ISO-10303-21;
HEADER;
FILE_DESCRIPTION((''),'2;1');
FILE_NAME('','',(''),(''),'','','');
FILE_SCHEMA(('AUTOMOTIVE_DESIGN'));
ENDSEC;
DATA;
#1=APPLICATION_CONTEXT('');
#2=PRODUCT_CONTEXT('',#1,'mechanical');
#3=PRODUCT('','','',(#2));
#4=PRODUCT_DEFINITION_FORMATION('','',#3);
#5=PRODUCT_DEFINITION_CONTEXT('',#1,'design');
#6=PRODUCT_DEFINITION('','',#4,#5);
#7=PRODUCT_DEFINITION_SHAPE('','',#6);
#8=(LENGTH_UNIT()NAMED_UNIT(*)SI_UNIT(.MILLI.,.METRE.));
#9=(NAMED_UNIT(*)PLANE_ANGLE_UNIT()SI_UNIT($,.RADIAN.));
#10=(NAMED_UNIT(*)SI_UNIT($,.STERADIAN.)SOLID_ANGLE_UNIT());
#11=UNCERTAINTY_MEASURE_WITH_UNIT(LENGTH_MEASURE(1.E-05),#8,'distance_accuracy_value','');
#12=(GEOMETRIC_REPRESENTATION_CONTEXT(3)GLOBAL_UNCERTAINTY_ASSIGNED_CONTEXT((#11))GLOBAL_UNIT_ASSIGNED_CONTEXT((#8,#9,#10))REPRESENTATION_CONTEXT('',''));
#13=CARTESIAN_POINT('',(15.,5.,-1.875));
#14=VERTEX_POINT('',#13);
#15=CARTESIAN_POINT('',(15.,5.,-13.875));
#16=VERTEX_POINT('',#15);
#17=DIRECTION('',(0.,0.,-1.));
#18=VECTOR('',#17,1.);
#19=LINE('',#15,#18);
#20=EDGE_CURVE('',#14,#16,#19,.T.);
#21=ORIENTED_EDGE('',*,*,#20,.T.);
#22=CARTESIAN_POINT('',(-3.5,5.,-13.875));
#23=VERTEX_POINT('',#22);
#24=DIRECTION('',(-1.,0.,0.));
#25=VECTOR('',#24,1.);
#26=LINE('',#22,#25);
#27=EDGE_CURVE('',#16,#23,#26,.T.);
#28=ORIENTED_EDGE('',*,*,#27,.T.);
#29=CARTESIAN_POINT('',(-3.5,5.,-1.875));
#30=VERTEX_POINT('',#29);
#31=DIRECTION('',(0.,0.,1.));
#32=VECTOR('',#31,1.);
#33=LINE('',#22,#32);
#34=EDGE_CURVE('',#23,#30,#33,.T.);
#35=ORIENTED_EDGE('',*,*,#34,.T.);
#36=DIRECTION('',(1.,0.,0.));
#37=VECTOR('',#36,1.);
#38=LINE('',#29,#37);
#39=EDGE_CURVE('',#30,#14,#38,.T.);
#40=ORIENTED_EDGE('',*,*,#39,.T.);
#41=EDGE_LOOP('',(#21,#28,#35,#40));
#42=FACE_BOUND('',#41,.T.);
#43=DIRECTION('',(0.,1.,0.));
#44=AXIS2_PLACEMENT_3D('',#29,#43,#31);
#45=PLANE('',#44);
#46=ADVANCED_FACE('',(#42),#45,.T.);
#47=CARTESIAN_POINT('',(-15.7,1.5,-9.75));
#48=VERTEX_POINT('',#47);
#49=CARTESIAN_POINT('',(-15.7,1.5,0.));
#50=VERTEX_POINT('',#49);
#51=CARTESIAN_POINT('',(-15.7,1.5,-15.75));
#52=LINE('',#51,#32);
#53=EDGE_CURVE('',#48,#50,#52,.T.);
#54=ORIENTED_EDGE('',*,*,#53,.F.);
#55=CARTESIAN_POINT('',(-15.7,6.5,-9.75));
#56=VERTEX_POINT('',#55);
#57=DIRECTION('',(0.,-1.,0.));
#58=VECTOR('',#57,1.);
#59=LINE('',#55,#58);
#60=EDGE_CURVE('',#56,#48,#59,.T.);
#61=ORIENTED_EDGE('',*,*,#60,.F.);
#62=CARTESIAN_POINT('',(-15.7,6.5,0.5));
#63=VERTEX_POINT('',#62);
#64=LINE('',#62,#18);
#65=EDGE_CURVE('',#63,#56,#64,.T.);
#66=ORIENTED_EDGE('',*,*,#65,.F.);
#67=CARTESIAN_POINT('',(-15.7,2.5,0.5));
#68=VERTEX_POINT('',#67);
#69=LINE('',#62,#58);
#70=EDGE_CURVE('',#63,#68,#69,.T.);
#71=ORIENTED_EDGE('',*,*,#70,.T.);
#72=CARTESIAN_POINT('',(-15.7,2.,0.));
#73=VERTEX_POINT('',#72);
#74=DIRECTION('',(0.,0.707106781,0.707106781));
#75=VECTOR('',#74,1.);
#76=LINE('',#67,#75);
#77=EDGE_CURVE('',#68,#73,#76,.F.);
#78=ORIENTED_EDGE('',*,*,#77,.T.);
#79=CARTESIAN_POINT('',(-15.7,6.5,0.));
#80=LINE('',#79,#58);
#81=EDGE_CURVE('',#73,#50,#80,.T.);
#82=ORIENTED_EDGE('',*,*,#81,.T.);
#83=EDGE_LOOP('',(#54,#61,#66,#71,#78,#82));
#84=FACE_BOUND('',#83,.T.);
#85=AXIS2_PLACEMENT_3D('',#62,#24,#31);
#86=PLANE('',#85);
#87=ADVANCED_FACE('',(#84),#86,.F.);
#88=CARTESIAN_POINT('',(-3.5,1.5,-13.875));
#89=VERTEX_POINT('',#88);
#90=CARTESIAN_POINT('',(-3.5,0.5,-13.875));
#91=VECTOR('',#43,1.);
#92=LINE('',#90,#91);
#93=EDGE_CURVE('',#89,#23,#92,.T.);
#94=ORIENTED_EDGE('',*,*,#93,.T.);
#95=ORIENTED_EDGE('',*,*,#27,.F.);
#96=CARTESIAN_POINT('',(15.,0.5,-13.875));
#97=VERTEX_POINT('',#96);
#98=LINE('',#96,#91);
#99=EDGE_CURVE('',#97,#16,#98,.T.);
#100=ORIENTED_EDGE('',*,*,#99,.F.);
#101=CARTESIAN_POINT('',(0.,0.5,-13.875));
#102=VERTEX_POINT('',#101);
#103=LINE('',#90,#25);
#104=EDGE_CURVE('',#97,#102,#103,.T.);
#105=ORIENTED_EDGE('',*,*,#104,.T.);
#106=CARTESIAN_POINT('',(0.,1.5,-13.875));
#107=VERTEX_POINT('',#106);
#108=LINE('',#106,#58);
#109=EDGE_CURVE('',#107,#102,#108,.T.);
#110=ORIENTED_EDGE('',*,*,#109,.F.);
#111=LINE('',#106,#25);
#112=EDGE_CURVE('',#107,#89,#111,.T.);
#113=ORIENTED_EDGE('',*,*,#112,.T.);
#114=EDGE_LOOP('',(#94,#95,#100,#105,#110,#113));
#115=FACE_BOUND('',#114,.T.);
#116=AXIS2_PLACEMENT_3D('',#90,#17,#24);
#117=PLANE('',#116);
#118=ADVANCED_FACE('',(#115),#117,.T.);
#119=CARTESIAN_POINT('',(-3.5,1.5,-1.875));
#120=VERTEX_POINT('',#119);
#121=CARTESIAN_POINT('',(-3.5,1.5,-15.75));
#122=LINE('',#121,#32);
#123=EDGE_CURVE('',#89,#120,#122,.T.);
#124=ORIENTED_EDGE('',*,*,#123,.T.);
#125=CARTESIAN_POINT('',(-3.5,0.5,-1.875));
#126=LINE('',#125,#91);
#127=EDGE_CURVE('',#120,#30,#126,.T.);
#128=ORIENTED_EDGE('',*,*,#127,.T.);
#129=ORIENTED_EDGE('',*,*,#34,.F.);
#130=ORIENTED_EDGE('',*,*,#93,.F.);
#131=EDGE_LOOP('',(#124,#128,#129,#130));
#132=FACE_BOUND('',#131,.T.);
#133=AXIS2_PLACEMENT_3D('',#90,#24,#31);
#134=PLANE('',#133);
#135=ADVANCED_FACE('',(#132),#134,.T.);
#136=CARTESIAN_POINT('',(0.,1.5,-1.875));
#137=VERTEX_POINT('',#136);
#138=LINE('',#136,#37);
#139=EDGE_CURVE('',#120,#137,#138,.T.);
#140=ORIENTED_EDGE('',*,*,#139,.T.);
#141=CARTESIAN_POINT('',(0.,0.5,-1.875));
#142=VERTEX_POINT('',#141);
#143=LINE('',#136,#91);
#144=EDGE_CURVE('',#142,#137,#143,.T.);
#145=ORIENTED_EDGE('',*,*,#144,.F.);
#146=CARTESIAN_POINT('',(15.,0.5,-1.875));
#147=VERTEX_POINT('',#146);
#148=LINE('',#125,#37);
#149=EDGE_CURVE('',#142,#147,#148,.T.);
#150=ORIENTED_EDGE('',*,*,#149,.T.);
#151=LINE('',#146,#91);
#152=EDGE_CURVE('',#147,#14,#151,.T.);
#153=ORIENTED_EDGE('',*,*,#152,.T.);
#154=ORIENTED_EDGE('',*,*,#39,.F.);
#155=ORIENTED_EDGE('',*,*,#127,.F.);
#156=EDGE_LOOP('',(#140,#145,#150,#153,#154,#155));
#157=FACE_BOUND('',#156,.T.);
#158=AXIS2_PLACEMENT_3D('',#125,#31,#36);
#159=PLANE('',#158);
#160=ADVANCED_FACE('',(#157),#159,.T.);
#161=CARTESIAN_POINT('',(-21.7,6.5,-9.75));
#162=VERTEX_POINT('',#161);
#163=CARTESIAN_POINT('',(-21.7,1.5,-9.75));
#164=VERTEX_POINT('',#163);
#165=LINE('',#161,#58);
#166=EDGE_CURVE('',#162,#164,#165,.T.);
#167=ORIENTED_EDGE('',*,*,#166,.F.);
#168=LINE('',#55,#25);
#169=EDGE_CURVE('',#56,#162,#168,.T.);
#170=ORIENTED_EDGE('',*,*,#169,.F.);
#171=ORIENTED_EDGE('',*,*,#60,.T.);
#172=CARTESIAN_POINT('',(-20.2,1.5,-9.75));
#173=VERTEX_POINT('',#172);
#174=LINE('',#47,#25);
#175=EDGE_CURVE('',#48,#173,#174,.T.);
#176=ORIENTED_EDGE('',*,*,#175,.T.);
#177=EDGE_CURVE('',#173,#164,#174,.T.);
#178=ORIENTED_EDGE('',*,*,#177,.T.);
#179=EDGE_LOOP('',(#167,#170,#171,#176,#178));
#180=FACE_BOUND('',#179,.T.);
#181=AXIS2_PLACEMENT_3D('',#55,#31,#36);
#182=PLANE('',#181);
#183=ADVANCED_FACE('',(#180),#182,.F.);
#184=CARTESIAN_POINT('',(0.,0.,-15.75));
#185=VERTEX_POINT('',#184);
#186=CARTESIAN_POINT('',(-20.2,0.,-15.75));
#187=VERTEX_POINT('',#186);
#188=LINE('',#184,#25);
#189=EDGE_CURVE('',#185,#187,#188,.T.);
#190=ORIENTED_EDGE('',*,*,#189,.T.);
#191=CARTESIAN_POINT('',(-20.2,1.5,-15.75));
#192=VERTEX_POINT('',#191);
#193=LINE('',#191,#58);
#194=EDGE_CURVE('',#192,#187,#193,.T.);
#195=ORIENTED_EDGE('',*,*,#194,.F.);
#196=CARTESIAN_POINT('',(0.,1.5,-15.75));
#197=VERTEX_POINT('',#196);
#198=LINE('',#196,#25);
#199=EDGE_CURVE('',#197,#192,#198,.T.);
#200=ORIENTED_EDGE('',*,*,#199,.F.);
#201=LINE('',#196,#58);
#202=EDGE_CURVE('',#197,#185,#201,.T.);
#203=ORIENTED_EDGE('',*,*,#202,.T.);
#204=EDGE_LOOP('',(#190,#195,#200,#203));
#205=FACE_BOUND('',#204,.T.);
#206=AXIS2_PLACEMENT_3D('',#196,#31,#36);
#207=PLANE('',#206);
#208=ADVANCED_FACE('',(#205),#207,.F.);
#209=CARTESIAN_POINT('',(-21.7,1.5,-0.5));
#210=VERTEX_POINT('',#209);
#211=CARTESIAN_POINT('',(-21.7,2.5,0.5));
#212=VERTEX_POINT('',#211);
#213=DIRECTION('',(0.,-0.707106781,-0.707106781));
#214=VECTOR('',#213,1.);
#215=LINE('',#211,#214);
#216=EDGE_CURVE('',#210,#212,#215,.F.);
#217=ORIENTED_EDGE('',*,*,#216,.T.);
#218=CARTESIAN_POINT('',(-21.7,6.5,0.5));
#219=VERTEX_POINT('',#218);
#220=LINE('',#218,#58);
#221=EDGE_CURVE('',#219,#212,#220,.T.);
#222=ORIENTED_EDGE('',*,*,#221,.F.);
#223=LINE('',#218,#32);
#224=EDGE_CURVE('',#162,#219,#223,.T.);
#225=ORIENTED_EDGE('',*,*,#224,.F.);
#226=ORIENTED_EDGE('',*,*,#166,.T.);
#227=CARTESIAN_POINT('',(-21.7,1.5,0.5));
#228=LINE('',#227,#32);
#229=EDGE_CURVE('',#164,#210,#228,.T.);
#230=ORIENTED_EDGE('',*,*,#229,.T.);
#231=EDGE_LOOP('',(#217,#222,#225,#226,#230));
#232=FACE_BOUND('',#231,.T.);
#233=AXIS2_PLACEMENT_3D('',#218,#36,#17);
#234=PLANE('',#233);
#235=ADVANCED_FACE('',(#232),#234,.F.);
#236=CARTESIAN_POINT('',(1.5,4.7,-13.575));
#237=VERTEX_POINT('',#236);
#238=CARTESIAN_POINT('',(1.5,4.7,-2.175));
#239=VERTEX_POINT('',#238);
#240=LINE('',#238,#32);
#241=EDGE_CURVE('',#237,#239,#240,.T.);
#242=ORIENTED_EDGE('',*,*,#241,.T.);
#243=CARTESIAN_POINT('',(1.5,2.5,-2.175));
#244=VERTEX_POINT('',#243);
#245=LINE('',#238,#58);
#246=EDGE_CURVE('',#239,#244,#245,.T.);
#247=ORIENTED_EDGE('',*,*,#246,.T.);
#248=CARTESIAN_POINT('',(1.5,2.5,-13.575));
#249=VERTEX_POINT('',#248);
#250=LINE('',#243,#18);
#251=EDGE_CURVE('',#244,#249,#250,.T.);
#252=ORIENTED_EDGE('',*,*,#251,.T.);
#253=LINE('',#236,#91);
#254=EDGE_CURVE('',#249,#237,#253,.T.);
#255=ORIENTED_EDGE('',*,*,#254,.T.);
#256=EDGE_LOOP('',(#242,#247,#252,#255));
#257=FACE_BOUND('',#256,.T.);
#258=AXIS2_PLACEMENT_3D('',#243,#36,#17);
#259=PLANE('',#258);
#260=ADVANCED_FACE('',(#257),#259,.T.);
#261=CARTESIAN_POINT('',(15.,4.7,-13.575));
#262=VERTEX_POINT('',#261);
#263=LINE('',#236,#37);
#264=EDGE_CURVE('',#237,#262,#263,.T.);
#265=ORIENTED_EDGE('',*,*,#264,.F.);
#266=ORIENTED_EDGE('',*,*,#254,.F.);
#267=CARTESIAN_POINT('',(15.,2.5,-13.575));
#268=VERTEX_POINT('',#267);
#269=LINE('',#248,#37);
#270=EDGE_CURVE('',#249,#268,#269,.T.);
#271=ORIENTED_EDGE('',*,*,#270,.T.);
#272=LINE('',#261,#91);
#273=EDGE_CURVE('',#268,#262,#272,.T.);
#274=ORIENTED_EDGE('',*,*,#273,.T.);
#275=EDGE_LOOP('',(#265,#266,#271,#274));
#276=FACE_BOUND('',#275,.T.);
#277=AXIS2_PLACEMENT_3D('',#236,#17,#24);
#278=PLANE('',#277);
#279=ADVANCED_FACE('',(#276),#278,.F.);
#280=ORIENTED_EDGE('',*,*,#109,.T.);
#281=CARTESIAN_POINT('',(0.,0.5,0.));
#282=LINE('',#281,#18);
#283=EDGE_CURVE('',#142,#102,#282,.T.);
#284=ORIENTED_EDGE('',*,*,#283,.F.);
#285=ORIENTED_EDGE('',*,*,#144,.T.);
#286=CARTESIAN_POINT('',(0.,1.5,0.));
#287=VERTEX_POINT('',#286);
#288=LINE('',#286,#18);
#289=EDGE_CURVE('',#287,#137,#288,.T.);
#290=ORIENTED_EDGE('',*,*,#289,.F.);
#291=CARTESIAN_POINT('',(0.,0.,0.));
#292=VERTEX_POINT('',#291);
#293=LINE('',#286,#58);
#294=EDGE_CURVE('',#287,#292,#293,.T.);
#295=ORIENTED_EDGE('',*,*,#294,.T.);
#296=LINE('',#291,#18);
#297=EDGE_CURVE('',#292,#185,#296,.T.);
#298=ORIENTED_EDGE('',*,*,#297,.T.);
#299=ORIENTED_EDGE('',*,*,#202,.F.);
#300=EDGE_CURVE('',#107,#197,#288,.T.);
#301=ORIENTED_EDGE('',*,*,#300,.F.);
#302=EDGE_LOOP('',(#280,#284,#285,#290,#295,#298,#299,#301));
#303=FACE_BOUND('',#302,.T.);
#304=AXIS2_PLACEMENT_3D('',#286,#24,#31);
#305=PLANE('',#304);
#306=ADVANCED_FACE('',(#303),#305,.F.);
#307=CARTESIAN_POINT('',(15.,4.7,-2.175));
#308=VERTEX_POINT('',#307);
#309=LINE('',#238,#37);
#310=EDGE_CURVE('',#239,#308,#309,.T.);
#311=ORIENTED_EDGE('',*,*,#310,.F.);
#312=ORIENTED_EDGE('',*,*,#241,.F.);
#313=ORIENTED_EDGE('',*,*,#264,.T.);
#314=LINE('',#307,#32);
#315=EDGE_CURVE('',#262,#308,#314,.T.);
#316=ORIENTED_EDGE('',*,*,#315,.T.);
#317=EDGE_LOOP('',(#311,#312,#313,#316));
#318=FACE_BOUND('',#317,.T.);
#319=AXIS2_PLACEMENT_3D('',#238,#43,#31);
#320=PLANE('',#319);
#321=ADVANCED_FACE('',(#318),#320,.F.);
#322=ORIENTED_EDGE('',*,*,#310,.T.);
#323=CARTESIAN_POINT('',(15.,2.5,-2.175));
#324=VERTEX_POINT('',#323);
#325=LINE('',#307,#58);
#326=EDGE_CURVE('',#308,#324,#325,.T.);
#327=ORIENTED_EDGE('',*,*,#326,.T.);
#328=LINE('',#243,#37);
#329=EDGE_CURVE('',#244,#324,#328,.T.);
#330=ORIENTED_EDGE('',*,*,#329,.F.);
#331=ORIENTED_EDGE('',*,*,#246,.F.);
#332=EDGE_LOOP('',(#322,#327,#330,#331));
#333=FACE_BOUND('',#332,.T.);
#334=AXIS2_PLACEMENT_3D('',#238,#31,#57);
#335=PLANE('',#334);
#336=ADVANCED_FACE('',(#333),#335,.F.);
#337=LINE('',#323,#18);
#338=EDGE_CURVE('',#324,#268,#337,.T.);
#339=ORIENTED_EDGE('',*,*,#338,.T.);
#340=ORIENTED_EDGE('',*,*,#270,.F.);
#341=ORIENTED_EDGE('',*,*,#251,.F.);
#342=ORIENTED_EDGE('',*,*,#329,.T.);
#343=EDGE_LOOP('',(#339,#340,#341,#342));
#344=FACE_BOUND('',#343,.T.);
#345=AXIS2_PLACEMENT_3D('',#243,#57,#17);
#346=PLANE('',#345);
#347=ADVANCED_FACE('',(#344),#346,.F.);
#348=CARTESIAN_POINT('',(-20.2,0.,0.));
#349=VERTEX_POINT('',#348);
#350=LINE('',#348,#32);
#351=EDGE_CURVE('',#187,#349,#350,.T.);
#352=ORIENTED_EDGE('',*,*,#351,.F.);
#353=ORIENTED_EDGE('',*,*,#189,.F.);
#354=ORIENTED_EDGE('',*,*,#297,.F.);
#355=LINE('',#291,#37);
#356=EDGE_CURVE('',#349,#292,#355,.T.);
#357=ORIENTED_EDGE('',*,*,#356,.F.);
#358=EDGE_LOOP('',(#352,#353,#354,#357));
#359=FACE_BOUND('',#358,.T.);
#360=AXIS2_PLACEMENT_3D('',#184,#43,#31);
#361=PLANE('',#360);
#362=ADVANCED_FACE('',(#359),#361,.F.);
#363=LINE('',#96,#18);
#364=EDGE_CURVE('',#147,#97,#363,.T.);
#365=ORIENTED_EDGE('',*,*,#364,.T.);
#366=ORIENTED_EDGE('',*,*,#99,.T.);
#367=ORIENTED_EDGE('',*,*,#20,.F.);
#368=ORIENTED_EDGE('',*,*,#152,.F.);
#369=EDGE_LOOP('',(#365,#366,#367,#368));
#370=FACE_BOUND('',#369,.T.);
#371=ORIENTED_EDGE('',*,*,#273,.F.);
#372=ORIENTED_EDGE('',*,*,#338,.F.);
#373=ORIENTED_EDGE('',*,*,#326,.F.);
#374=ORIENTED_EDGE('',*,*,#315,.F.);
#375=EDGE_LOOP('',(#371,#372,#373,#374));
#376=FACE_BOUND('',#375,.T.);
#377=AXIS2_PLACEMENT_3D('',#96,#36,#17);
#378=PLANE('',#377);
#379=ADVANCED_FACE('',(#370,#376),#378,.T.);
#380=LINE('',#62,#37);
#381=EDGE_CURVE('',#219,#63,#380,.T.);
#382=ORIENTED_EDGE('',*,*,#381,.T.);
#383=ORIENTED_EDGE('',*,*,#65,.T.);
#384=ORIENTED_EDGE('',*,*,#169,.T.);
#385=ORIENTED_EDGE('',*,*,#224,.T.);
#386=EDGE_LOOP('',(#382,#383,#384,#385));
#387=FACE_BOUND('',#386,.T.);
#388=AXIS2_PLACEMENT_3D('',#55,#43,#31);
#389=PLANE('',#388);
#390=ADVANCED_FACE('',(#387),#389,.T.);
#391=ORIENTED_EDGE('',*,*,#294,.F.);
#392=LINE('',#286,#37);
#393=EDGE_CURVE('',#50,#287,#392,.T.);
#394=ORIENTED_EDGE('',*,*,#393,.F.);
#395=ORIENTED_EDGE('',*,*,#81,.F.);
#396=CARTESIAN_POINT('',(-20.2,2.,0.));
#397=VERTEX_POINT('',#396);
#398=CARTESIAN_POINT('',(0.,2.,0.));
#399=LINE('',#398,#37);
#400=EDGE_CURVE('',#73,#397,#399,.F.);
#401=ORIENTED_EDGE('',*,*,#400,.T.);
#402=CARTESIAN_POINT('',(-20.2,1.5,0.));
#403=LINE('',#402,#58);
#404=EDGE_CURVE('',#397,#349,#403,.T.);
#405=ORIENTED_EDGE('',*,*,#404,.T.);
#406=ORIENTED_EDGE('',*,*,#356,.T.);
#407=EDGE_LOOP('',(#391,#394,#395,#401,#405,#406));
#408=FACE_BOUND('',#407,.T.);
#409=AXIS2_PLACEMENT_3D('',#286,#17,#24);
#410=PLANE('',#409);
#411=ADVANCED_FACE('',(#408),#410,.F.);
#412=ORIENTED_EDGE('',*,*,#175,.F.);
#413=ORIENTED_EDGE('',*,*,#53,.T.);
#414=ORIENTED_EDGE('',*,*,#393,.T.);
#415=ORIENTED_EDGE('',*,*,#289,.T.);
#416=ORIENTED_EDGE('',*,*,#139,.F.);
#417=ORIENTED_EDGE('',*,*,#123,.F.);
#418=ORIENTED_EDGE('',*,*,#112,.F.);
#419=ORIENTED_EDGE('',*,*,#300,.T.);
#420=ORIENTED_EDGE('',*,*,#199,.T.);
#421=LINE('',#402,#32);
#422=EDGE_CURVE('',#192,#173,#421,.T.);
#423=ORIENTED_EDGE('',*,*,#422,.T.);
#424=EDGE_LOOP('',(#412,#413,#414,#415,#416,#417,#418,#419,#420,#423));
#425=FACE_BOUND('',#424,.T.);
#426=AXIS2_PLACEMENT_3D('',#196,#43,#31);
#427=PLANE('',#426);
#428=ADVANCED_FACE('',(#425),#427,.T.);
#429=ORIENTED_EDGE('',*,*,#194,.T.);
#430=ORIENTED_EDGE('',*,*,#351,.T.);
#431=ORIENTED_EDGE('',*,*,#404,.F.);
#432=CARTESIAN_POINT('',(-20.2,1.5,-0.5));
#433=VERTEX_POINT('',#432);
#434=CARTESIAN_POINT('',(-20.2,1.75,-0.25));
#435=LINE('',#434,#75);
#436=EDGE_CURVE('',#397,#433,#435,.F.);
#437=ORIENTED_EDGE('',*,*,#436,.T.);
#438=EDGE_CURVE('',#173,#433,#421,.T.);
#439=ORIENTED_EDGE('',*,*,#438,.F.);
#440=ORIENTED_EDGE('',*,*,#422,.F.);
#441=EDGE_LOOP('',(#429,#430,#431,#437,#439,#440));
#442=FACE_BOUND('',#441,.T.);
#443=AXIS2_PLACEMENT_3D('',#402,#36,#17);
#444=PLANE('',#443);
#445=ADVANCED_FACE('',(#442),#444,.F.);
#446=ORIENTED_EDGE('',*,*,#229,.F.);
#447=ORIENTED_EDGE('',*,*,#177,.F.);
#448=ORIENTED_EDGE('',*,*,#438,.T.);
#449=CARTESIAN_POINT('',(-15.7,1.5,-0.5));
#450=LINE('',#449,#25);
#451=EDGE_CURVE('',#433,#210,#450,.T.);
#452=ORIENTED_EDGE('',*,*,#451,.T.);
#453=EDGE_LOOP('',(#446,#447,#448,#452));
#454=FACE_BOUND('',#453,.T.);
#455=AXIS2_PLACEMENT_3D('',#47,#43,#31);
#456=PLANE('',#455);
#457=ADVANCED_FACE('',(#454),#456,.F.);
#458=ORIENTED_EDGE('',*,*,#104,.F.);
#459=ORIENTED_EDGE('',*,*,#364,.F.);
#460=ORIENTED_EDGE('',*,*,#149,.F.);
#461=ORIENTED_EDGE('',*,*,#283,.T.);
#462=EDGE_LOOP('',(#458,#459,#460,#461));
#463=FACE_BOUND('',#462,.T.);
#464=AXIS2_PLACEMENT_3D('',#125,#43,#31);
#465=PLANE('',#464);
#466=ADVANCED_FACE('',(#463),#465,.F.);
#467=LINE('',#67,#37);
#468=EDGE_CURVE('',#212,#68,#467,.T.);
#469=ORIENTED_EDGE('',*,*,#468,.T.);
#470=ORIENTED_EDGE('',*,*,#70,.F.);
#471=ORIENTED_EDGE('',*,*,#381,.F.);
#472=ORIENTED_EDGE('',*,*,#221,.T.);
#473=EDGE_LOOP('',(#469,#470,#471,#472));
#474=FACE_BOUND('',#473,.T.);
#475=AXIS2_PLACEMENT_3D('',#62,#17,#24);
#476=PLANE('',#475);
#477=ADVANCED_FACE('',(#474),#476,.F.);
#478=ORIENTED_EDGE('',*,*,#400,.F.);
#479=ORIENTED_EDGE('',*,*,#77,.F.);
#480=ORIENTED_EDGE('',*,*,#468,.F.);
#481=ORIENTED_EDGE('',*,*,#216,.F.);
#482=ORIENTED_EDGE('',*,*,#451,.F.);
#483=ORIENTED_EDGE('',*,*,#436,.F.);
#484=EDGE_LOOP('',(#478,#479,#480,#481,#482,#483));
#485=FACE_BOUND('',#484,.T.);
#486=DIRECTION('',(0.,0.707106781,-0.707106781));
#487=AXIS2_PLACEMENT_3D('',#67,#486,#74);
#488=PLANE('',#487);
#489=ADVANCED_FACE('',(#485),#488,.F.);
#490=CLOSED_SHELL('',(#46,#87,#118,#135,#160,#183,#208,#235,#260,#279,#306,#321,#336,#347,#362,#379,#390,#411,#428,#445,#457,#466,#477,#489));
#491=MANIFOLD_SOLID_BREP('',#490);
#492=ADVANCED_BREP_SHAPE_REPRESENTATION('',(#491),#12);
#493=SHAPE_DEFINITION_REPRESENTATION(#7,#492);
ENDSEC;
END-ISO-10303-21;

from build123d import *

# Parameters (mm, degrees)
ESQUISSE1_W             = 20.2
ESQUISSE1_H             = 15.75
BOSS_EXTRU_1_DEPTH      = 1.5
BOSS_EXTRU_2_DEPTH      = 3.5
BOSS_EXTRU_2_DEPTH_BACK = 1
ESQUISSE2_W             = 18.5
ESQUISSE2_H             = 12
ESQUISSE3_W             = 11.4
ESQUISSE3_H             = 2.2
ENL_V_MAT_EXTRU_1_DEPTH = 13.5
ESQUISSE4_W             = 6
ESQUISSE4_H             = 10.25
BOSS_EXTRU_4_DEPTH      = 5
CHANFREIN1_SIZE         = 1


with BuildPart() as part:
    # Esquisse1 → Boss.-Extru.1 (new body)
    with BuildSketch(Plane(origin=(0, 0, 0), x_dir=(1, 0, 0), z_dir=(0, 1, 0))):
        with Locations((-10.1, 7.875)):
            Rectangle(ESQUISSE1_W, ESQUISSE1_H)
    extrude(amount=BOSS_EXTRU_1_DEPTH)

    # Esquisse2 → Boss.-Extru.2 (add, two sides: drawn at the far end of the back side and taken through both)
    with BuildSketch(Plane(origin=(0, 1.5, 0), x_dir=(1, 0, 0), z_dir=(0, 1, 0)).offset(-BOSS_EXTRU_2_DEPTH_BACK)):
        with Locations((5.75, 7.875)):
            Rectangle(ESQUISSE2_W, ESQUISSE2_H)
    extrude(amount=BOSS_EXTRU_2_DEPTH + BOSS_EXTRU_2_DEPTH_BACK)

    # Esquisse3 → Enlèv. mat.-Extru.1 (cut)
    with BuildSketch(Plane(origin=(15, 0, 0), x_dir=(0, 0, -1), z_dir=(1, 0, 0))):
        with Locations((7.875, 3.6)):
            Rectangle(ESQUISSE3_W, ESQUISSE3_H)
    extrude(amount=-ENL_V_MAT_EXTRU_1_DEPTH, mode=Mode.SUBTRACT)

    # Esquisse4 → Boss.-Extru.4 (add)
    with BuildSketch(Plane(origin=(0, 1.5, 0), x_dir=(1, 0, 0), z_dir=(0, 1, 0))):
        with Locations((-18.7, 4.625)):
            Rectangle(ESQUISSE4_W, ESQUISSE4_H)
    extrude(amount=BOSS_EXTRU_4_DEPTH)

    # Chanfrein1
    # the kernel refuses this chamfer: 1 mm, written as the material it takes off along each edge
    with BuildSketch(Plane(origin=(-13.128317012, 1.5, 0.5), x_dir=(0, -0.02749587661058627, -0.9996219169112968), z_dir=(-1, 0, 0))) as chanfrein1_piece_1_section:
        Polygon((CHANFREIN1_SIZE * 0.999621916911, -CHANFREIN1_SIZE * 0.0274958766106), (-CHANFREIN1_SIZE * 0.0274958766106, -CHANFREIN1_SIZE * 0.999621916911), (0, 0), align=None)
    chanfrein1_piece_1 = extrude(amount=11.143365976, mode=Mode.PRIVATE)
    chanfrein1_piece_1 = split(chanfrein1_piece_1, bisect_by=Plane(origin=(-16.664158506, 1.893401084, 0), z_dir=(0, 0, 1)), keep=Keep.TOP, mode=Mode.PRIVATE)
    chanfrein1_piece_1 = split(chanfrein1_piece_1, bisect_by=Plane(origin=(-20.2, 1.893401084, 0.29176571), z_dir=(1, 0, 0)), keep=Keep.TOP, mode=Mode.PRIVATE)
    add(chanfrein1_piece_1, mode=Mode.SUBTRACT)
    with BuildSketch(Plane(origin=(-13.128317012, 1.5, 0.5), x_dir=(0, -0.02749587661058627, -0.9996219169112968), z_dir=(-1, 0, 0))) as chanfrein1_piece_2_section:
        Polygon((CHANFREIN1_SIZE * 0.999621916911, -CHANFREIN1_SIZE * 0.0274958766106), (-CHANFREIN1_SIZE * 0.0274958766106, -CHANFREIN1_SIZE * 0.999621916911), (0, 0), align=None)
    chanfrein1_piece_2 = extrude(amount=11.143365976, mode=Mode.PRIVATE)
    chanfrein1_piece_2 = split(chanfrein1_piece_2, bisect_by=Plane(origin=(-22.235841494, 1.645570657, 0), z_dir=(0, 0, -1)), keep=Keep.TOP, mode=Mode.PRIVATE)
    chanfrein1_piece_2 = split(chanfrein1_piece_2, bisect_by=Plane(origin=(-20.2, 1.645570657, -0.181859612), z_dir=(-1, 0, 0)), keep=Keep.TOP, mode=Mode.PRIVATE)
    add(chanfrein1_piece_2, mode=Mode.SUBTRACT)
    with BuildSketch(Plane(origin=(-13.128317012, 1.5, 0.5), x_dir=(0, -0.02749587661058627, -0.9996219169112968), z_dir=(-1, 0, 0))) as chanfrein1_piece_3_section:
        Polygon((CHANFREIN1_SIZE * 0.999621916911, -CHANFREIN1_SIZE * 0.0274958766106), (-CHANFREIN1_SIZE * 0.0274958766106, -CHANFREIN1_SIZE * 0.999621916911), (0, 0), align=None)
    chanfrein1_piece_3 = extrude(amount=11.143365976, mode=Mode.PRIVATE)
    chanfrein1_piece_3 = split(chanfrein1_piece_3, bisect_by=Plane(origin=(-22.235841494, 1.893401084, 0), z_dir=(0, 0, 1)), keep=Keep.TOP, mode=Mode.PRIVATE)
    chanfrein1_piece_3 = split(chanfrein1_piece_3, bisect_by=Plane(origin=(-20.2, 1.893401084, 0.29176571), z_dir=(-1, 0, 0)), keep=Keep.TOP, mode=Mode.PRIVATE)
    add(chanfrein1_piece_3, mode=Mode.SUBTRACT)


solid = part.part
